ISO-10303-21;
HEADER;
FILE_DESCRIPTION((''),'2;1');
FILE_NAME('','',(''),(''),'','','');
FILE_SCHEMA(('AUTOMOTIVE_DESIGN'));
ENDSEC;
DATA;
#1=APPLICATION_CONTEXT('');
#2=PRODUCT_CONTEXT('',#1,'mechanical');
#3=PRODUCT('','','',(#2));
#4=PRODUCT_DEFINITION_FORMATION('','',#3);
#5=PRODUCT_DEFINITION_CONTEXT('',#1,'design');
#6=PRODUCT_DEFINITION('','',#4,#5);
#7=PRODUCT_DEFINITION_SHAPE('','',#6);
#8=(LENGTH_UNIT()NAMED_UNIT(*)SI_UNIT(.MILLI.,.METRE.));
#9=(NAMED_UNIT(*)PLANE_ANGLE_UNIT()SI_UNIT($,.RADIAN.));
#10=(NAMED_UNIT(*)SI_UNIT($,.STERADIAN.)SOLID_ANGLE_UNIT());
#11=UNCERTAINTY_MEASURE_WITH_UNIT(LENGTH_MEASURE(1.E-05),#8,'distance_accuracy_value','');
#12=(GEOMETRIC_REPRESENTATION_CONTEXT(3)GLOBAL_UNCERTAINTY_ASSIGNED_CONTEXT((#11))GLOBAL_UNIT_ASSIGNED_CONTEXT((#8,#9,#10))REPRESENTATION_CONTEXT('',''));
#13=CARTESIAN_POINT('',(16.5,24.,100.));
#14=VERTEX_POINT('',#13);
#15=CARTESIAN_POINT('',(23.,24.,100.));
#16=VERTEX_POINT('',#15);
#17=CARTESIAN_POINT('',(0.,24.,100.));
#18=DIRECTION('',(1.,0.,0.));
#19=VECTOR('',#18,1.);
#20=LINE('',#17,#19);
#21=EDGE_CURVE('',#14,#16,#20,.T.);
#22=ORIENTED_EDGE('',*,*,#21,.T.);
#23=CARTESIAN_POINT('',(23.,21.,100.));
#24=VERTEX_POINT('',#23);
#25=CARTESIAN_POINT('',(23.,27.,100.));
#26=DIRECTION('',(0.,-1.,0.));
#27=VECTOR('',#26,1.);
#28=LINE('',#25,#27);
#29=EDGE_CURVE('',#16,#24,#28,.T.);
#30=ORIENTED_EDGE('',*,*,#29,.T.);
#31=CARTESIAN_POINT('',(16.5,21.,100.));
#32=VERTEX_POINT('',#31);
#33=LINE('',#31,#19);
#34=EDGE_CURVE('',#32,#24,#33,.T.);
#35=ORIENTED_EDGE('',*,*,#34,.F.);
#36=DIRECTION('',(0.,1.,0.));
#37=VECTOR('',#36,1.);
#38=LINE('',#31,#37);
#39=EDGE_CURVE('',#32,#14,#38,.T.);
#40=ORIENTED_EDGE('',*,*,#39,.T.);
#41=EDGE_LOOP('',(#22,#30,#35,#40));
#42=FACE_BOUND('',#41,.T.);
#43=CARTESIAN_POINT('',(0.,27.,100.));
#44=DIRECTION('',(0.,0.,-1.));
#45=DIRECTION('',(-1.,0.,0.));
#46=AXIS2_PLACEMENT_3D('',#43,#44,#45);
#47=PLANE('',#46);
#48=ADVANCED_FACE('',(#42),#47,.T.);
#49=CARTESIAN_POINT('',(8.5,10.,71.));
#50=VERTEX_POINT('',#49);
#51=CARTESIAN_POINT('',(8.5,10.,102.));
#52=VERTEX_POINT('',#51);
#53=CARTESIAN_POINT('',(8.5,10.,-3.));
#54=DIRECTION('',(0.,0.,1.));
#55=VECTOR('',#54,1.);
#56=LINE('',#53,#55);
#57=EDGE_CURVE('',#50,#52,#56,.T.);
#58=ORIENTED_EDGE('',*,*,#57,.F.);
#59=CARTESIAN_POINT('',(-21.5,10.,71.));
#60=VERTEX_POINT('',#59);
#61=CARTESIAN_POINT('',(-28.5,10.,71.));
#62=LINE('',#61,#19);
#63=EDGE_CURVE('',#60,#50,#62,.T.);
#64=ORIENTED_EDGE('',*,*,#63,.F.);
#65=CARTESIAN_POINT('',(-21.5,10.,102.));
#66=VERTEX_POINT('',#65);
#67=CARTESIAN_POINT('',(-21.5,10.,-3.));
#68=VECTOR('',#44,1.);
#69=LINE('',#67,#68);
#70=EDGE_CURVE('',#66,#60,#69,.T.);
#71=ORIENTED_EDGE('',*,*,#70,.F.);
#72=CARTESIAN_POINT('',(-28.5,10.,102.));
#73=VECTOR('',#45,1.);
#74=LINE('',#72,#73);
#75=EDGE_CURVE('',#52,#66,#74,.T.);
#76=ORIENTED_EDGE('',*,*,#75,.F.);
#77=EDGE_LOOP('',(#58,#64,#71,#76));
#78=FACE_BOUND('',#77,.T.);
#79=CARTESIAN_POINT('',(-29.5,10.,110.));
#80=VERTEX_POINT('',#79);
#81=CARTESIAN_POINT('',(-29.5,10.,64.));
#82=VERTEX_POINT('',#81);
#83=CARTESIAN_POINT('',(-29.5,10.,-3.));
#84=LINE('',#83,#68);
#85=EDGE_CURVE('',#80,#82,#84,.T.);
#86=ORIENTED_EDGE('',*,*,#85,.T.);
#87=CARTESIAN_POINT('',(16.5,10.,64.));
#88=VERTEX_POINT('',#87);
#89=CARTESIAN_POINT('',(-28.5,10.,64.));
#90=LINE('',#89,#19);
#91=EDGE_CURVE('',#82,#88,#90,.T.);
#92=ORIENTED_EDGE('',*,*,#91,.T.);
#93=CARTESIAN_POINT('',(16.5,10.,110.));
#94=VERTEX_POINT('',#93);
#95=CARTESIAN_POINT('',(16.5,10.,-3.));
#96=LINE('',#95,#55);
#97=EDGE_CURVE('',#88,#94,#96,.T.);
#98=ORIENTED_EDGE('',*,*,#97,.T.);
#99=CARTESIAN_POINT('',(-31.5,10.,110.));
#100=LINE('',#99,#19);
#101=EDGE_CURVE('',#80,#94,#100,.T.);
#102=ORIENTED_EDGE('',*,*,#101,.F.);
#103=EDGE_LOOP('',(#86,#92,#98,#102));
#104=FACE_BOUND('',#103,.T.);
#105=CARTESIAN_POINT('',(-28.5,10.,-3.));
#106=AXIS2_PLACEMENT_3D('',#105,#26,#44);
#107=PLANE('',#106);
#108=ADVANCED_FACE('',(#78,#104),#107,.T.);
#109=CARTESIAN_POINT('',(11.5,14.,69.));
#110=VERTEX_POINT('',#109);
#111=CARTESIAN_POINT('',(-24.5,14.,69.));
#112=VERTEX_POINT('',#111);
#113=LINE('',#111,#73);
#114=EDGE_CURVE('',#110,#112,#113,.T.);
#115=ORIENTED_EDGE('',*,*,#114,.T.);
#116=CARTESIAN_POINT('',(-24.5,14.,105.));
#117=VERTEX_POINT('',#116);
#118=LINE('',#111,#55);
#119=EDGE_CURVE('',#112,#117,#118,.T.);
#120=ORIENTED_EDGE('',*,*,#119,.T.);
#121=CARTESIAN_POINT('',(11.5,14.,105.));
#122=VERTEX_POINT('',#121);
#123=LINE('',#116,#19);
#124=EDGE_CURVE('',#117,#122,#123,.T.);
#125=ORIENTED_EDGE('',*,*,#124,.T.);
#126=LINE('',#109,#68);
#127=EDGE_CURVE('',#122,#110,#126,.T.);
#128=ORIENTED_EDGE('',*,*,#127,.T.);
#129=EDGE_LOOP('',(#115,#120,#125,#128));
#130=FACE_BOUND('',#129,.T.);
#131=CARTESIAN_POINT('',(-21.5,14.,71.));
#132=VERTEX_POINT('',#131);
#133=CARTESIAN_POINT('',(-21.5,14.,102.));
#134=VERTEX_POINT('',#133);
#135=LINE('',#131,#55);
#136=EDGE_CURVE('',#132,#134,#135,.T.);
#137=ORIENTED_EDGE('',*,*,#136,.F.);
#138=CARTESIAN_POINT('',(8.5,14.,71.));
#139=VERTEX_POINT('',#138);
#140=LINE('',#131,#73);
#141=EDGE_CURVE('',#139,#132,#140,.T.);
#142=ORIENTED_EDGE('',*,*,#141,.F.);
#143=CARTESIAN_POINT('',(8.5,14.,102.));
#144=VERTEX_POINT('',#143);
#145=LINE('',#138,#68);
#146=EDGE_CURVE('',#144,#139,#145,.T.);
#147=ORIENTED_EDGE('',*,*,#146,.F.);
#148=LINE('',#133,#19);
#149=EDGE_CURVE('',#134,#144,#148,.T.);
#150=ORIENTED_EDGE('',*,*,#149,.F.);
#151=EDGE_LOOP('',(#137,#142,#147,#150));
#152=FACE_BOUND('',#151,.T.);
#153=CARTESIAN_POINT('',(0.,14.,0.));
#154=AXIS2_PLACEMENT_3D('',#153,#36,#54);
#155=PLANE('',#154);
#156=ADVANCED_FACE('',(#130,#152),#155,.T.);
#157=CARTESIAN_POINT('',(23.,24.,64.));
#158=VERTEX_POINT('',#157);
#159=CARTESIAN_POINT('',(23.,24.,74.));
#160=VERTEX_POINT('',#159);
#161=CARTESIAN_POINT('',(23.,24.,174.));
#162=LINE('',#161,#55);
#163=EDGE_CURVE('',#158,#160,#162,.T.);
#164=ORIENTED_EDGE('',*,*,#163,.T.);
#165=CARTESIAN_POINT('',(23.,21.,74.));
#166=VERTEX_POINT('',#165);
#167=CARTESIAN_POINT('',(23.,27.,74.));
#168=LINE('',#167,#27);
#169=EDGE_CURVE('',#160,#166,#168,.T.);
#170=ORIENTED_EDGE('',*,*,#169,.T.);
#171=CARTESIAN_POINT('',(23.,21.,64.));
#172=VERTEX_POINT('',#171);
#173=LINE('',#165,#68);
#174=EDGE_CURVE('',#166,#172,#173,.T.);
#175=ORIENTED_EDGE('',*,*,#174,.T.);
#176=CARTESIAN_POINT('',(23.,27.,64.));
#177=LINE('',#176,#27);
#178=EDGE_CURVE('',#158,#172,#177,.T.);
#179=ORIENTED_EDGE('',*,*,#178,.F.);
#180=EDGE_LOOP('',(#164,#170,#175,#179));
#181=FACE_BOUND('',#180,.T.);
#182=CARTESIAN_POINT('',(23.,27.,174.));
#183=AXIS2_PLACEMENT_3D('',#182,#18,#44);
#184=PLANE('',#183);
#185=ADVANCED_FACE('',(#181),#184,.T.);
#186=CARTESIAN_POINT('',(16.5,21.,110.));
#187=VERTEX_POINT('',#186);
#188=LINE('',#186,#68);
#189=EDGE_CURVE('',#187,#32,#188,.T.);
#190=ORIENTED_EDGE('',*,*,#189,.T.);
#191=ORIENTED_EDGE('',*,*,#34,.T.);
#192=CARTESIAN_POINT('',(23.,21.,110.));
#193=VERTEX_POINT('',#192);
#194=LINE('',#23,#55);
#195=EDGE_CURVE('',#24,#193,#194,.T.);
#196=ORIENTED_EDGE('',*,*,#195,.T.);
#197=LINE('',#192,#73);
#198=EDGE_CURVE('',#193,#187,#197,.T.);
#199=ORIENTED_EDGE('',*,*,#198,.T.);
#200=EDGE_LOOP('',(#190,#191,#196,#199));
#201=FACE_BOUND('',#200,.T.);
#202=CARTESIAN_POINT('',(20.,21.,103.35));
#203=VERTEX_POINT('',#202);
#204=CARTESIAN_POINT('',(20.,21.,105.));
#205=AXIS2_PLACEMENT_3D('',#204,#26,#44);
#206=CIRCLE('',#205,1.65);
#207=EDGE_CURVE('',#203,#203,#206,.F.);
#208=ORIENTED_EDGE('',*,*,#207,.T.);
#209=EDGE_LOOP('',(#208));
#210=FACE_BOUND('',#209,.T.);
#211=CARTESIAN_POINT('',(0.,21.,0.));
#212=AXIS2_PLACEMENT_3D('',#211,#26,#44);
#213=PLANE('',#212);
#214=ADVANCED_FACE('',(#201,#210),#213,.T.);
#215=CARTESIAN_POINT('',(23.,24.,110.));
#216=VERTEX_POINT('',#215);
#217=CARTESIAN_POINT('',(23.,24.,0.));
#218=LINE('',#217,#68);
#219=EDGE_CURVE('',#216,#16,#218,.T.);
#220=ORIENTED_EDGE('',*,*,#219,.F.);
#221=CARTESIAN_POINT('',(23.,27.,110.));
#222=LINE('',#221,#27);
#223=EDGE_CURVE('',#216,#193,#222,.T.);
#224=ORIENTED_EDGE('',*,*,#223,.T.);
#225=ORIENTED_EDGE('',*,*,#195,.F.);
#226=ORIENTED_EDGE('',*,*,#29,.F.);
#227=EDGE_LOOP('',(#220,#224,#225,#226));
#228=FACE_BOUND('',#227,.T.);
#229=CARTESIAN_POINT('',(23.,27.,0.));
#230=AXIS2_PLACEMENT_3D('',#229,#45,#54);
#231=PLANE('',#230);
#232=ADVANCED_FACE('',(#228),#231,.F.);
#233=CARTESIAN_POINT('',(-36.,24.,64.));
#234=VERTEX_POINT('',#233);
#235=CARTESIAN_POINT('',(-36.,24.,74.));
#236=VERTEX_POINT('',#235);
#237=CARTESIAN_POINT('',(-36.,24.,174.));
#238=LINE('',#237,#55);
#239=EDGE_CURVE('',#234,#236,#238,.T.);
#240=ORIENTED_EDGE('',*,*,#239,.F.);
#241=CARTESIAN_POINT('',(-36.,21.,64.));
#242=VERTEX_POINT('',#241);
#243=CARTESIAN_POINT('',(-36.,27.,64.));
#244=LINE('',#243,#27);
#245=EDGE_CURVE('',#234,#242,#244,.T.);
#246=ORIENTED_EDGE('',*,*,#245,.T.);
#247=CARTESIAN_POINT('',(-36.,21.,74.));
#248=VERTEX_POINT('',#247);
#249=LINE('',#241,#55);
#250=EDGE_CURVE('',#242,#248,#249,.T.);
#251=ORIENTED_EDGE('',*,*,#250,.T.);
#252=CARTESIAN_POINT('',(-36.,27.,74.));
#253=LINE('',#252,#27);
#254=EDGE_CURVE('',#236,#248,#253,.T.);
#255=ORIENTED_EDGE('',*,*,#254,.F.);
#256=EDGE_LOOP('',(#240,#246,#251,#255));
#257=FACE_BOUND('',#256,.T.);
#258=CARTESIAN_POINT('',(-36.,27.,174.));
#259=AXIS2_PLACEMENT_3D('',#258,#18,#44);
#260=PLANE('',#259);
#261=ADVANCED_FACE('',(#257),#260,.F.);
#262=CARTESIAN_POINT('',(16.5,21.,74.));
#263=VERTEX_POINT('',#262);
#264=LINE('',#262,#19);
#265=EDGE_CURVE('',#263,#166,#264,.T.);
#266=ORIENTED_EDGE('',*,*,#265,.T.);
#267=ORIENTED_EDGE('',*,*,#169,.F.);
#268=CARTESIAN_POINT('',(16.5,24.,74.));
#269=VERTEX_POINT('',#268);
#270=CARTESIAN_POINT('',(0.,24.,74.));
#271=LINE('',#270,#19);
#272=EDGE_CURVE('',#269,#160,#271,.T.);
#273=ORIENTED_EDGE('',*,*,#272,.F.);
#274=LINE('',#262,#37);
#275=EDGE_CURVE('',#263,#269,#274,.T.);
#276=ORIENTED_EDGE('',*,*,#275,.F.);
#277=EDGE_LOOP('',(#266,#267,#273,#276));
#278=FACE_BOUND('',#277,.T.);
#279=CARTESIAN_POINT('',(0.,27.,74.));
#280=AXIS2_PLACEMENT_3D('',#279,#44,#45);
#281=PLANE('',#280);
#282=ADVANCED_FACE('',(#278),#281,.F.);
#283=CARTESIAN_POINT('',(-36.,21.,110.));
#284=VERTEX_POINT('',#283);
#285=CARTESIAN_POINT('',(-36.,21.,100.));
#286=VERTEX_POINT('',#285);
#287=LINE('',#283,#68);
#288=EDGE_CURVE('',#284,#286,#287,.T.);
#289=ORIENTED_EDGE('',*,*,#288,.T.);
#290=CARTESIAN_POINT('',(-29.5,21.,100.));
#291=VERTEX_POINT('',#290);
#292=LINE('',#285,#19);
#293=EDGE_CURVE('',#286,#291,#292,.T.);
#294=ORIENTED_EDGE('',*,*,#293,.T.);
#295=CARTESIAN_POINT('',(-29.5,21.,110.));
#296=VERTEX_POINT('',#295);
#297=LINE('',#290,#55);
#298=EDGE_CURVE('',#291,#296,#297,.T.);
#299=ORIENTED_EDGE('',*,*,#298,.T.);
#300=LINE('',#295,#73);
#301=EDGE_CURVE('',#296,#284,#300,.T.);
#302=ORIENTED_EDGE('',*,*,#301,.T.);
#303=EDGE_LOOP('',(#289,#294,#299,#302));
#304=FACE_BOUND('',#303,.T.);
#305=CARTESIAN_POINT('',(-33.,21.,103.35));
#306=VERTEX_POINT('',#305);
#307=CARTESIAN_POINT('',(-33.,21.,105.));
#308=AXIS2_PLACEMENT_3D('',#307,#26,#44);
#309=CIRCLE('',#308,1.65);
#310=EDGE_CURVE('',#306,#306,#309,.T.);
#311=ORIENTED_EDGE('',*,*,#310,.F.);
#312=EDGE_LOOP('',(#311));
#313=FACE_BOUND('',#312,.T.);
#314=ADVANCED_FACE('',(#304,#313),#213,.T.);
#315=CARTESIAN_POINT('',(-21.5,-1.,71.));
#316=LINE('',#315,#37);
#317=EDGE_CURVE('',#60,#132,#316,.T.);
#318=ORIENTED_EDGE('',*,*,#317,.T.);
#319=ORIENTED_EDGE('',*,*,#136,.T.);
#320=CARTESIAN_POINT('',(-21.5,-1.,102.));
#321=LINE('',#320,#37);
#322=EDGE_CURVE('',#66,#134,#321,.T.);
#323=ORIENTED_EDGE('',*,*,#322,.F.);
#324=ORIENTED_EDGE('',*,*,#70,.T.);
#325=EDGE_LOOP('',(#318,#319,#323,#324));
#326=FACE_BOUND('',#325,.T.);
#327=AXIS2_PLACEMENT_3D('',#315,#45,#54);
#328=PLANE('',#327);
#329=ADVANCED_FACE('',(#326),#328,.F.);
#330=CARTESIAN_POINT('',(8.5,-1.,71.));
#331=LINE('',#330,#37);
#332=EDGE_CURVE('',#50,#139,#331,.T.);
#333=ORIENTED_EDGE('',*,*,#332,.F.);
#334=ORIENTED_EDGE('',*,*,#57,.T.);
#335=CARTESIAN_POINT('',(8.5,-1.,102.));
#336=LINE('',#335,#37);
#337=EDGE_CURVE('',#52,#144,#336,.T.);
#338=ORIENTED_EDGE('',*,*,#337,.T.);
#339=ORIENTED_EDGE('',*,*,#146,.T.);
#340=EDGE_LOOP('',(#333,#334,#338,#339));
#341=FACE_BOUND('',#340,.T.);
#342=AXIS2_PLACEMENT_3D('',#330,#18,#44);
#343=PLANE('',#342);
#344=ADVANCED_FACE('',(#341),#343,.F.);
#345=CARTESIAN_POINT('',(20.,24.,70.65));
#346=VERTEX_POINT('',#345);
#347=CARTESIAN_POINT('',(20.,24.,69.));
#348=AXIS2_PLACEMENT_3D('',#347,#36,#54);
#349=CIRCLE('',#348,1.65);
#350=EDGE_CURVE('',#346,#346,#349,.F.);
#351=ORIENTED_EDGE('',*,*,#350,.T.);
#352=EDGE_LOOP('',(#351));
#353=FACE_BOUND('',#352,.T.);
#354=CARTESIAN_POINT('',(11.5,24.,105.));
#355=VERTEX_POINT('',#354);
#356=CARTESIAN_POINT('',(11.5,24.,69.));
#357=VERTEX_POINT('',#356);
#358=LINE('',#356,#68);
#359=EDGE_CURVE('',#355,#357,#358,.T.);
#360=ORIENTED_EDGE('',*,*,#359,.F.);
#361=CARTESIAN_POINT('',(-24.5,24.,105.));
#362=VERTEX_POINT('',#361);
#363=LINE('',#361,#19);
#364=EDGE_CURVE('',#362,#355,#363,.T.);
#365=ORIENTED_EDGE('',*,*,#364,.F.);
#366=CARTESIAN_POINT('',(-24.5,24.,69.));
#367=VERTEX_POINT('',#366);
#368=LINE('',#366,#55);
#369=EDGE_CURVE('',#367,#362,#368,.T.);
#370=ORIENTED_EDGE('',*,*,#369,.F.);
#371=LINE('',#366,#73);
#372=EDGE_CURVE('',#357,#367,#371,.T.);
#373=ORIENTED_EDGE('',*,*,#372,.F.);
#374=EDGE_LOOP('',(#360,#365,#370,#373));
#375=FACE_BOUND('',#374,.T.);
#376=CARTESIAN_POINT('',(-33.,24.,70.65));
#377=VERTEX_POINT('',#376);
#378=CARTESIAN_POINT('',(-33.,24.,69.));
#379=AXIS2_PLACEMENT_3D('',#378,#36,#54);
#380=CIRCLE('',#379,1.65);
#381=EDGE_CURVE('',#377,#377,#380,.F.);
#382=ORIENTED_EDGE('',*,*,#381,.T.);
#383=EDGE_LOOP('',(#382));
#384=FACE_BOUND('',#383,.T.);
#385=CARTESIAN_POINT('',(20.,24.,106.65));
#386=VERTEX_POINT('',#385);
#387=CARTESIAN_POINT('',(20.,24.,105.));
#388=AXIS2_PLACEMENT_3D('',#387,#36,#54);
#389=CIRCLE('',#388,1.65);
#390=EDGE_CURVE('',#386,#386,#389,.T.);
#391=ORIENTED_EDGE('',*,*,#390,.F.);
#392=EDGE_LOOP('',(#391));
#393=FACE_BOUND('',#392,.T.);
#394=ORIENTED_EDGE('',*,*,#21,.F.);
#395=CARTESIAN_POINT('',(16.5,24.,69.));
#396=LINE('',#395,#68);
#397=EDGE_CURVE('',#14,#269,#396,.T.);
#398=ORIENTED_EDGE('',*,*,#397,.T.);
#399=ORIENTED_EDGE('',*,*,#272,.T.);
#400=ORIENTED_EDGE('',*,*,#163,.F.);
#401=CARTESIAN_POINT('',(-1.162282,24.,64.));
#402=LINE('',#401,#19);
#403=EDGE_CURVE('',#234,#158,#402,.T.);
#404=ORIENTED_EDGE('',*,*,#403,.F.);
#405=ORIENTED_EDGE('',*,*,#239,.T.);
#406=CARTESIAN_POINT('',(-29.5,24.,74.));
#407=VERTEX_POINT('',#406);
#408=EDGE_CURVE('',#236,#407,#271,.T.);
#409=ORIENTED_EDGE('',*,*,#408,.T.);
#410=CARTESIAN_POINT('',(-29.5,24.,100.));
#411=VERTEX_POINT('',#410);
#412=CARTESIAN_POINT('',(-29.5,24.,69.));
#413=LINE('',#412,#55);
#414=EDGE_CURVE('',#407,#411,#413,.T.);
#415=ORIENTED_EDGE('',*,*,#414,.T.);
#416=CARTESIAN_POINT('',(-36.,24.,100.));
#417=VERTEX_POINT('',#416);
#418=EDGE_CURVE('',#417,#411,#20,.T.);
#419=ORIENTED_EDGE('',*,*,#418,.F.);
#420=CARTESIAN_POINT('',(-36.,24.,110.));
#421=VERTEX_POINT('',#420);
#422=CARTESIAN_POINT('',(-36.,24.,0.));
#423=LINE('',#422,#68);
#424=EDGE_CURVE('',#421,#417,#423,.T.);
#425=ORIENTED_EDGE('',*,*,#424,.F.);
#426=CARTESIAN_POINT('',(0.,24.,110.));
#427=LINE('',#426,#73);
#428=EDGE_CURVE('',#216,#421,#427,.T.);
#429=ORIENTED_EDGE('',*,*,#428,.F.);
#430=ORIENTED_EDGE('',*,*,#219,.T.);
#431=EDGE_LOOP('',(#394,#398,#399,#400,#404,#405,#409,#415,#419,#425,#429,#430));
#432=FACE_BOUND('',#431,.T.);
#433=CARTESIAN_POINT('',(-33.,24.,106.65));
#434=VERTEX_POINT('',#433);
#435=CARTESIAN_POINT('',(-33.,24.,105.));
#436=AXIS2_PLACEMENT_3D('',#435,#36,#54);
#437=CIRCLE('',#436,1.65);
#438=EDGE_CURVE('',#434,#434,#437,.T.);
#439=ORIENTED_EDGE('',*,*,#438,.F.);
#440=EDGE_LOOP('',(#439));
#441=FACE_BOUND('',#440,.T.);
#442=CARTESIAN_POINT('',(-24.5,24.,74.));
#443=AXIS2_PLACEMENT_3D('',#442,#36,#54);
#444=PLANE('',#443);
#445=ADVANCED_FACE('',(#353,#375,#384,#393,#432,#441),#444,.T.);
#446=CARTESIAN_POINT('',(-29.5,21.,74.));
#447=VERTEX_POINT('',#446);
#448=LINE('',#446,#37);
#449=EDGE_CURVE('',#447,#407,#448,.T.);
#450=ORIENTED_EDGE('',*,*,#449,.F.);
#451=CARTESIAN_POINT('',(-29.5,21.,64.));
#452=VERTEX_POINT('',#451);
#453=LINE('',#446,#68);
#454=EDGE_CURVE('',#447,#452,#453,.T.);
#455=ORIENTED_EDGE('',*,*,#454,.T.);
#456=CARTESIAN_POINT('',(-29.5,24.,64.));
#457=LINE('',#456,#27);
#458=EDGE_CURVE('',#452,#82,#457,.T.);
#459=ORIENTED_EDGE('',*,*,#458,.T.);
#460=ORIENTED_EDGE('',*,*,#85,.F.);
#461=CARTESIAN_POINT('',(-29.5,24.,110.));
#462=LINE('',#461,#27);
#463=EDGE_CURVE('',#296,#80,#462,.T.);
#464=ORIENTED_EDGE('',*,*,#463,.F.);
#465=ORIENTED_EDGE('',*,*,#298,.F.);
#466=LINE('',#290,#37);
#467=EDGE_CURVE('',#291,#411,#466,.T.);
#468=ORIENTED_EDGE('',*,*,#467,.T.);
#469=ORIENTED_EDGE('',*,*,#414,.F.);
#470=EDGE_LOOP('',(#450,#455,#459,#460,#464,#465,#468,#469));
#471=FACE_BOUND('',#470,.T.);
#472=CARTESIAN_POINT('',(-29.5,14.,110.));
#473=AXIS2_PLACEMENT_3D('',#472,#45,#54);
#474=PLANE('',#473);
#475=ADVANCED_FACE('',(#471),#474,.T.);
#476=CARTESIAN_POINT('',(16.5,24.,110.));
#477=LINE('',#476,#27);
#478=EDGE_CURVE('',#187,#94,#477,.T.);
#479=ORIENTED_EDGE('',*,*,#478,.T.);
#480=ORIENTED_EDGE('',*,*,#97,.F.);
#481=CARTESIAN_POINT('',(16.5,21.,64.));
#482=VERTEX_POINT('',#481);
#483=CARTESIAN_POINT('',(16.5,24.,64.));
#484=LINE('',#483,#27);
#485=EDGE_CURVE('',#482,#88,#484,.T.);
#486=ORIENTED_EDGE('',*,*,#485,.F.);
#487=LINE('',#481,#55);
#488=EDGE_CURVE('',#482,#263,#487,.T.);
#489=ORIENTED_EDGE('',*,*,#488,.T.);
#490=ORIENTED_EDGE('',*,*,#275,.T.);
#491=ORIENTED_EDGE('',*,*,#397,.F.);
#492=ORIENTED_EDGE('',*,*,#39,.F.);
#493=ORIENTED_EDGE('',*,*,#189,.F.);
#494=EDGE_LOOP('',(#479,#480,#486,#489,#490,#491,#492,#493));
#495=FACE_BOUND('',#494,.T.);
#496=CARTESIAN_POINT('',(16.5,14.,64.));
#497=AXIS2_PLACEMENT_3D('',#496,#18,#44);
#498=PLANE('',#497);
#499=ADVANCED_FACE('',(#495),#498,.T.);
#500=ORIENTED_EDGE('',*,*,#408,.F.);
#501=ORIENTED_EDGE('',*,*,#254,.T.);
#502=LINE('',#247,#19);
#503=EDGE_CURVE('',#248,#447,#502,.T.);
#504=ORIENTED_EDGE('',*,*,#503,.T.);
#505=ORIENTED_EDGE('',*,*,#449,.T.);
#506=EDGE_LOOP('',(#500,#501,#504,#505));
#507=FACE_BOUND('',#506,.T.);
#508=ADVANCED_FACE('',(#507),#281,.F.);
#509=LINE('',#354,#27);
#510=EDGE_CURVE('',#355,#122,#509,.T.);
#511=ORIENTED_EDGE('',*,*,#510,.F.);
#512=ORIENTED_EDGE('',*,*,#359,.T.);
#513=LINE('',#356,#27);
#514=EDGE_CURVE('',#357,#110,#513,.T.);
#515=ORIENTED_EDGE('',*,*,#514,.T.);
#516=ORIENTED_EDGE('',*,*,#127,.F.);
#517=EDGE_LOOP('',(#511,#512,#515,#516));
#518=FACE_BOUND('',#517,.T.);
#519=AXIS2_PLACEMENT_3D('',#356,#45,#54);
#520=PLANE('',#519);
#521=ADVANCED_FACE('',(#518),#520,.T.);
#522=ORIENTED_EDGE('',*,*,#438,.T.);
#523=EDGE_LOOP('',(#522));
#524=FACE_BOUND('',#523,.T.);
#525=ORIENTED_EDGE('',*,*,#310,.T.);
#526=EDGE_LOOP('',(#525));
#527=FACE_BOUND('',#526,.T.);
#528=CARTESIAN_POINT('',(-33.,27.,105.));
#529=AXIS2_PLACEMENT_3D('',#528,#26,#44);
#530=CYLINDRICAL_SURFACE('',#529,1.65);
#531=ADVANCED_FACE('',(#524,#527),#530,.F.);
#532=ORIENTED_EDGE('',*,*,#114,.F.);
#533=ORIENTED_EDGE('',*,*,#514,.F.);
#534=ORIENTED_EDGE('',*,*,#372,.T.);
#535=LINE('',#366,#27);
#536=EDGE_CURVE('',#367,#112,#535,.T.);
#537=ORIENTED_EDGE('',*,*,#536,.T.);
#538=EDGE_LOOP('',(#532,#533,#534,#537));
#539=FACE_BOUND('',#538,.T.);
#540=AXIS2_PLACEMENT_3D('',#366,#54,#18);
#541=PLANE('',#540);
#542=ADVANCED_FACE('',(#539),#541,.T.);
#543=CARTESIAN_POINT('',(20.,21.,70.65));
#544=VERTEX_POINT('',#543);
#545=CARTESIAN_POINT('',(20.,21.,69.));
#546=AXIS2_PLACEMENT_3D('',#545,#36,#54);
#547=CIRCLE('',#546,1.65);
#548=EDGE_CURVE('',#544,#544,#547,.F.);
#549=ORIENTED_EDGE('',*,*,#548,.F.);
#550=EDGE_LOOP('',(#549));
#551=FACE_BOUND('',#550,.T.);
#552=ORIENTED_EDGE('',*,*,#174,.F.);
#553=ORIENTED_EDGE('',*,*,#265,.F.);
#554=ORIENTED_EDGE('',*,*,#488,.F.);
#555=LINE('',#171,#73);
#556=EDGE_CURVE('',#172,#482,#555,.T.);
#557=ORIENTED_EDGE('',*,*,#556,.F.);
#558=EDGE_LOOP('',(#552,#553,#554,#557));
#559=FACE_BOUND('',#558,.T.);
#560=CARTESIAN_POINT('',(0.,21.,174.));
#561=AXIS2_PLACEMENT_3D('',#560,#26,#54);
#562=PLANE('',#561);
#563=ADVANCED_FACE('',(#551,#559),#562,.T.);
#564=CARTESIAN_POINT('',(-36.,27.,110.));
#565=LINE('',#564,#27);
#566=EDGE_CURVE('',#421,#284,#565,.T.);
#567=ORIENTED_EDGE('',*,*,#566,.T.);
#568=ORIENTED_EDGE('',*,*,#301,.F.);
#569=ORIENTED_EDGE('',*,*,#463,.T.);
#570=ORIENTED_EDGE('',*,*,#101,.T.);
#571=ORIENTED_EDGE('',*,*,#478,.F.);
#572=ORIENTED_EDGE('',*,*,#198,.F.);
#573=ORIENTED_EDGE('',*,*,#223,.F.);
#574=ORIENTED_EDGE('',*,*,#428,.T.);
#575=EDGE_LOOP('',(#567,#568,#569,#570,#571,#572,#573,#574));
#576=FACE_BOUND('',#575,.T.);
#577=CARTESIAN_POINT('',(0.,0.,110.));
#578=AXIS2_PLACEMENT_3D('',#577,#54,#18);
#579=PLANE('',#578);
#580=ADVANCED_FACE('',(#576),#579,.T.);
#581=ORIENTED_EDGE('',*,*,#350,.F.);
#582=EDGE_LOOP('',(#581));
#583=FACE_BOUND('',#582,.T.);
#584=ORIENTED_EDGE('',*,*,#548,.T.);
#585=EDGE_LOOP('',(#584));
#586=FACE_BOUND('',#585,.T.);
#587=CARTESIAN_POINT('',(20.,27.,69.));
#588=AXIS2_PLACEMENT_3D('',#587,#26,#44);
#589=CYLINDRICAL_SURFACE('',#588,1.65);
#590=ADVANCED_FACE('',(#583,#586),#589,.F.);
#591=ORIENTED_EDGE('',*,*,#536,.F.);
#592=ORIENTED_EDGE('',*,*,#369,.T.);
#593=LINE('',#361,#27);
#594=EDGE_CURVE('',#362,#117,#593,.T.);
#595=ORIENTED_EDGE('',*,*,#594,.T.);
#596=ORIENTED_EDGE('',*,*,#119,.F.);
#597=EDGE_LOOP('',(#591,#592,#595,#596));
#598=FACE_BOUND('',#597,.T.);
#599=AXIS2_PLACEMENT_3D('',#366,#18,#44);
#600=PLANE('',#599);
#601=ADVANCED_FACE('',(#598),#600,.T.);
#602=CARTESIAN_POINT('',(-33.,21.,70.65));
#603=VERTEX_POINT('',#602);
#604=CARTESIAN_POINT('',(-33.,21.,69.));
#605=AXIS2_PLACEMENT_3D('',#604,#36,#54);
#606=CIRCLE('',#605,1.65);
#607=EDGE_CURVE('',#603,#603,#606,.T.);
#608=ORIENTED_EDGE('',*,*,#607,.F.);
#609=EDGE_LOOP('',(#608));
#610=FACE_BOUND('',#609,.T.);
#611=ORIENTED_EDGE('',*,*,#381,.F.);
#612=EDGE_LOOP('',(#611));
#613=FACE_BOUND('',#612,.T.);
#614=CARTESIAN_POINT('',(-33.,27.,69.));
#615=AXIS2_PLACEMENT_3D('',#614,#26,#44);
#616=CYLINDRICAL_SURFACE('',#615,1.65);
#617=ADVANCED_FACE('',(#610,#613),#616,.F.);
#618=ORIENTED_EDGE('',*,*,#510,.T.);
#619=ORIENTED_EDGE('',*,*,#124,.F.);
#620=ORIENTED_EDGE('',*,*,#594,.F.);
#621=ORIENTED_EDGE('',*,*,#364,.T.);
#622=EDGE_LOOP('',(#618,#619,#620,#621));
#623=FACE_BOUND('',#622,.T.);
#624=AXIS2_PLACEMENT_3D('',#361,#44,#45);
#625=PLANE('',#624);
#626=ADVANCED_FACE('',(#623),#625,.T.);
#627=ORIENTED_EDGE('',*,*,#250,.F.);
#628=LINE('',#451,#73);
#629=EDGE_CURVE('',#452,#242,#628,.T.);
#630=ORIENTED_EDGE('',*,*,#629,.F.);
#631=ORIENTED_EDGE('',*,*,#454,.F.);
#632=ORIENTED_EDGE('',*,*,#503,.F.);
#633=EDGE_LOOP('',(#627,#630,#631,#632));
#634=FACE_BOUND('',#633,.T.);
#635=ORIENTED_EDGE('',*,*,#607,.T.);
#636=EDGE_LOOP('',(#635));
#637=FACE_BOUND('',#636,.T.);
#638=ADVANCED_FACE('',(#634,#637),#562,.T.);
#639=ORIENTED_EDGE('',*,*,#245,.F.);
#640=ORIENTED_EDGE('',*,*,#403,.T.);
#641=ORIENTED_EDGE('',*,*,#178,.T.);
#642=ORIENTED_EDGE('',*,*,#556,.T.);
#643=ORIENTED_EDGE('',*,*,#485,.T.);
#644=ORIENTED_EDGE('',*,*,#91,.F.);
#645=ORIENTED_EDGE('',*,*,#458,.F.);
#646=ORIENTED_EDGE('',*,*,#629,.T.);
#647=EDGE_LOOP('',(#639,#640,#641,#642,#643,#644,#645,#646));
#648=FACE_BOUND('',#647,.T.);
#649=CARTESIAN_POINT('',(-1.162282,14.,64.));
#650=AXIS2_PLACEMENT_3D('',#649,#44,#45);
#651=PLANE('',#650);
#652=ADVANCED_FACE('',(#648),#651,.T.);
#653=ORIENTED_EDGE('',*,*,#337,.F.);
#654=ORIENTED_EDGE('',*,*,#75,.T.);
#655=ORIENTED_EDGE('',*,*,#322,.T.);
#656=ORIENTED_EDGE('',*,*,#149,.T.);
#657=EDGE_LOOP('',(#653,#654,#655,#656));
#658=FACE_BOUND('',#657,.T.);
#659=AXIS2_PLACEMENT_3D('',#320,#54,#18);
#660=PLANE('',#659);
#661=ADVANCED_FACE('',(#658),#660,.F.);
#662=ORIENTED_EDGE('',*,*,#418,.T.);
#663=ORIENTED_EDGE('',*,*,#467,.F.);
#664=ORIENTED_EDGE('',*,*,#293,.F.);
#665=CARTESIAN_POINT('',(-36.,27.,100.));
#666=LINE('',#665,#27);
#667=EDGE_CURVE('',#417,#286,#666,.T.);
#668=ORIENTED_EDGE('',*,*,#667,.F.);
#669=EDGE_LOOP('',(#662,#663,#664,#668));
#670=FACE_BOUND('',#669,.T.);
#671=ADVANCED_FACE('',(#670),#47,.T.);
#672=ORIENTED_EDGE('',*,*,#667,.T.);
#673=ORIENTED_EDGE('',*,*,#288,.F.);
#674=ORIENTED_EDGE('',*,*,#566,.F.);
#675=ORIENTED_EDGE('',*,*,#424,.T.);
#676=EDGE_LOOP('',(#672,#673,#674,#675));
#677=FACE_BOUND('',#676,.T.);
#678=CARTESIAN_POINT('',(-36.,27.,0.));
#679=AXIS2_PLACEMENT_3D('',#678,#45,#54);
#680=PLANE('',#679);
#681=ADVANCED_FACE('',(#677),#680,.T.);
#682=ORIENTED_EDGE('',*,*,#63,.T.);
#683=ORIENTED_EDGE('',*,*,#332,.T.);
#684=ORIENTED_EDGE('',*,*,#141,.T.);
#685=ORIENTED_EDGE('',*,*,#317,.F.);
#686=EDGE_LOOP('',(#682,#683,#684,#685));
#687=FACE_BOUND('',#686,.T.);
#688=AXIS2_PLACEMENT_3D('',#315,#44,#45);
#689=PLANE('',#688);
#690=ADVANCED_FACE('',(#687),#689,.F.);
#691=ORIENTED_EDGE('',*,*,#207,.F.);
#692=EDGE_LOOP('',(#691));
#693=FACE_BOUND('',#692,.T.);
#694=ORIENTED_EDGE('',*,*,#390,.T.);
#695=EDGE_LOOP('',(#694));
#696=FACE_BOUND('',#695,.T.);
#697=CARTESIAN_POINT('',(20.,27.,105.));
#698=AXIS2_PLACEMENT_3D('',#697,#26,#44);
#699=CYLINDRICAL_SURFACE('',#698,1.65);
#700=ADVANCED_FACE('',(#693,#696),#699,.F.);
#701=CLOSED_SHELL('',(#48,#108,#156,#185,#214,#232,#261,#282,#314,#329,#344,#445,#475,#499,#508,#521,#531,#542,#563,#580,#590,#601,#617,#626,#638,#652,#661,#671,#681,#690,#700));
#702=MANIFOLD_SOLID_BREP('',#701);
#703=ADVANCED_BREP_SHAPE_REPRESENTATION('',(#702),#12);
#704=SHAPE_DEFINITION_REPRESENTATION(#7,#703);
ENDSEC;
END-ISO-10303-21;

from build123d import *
from build123d.topology import SkipClean

# Parameters (mm, degrees)
SKETCH_1_W                 = 21
SKETCH_1_H                 = 20
EXTRUDE_1_DEPTH            = 4
SKETCH_2_R                 = 1.65
CUT_EXTRUDE_1_DEPTH        = 4
FILLET_1_R                 = 5
SKETCH_4_W                 = 44
SKETCH_4_H                 = 3
EXTRUDE_2_DEPTH            = 7
EXTRUDE_3_DEPTH            = 110
SKETCH_7_R                 = 1.5
CUT_EXTRUDE_3_DEPTH        = 93
CUT_EXTRUDE_4_DEPTH        = 93
SKETCH_18_W                = 8.046739473
SKETCH_18_H                = 3.477045647
CUT_EXTRUDE_5_DEPTH        = 10
EXTRUDE_START              = 1
SKETCH_21_R                = 1.5
EXTRUDE_4_DEPTH            = 1
SKETCH_27_W                = 38
SKETCH_27_H                = 4
EXTRUDE_9_DEPTH            = 1
FILLET_4_R                 = 0.5
EXTRUDE_START_2            = -4
SKETCH_28_R                = 1.5
EXTRUDE_10_DEPTH           = 4
SKETCH_30_W                = 6
SKETCH_30_H                = 110.5
EXTRUDE_11_DEPTH           = 4
SKETCH_31_W                = 50
SKETCH_31_H                = 4
CUT_EXTRUDE_6_DEPTH        = 5
SKETCH_32_W                = 30
SKETCH_32_H                = 31
CUT_EXTRUDE_7_DEPTH        = 15
SKETCH_33_W                = 23.953260528
SKETCH_33_H                = 6
EXTRUDE_12_DEPTH           = 4
SKETCH_34_W                = 46
SKETCH_34_H                = 46
SKETCH_34_W_2              = 36
SKETCH_34_H_2              = 36
EXTRUDE_1_2_DEPTH          = 10
SKETCH_36_W                = 6
SKETCH_36_H                = 6
EXTRUDE_13_DEPTH           = 4
SKETCH_37_R                = 1.7
CUT_EXTRUDE_8_DEPTH        = 10
FILLET_6_R                 = 1
SKETCH_38_W                = 10
SKETCH_38_H                = 5
CUT_EXTRUDE_9_DEPTH        = 10
SKETCH_39_W                = 7.314348503
SKETCH_39_H                = 1
SKETCH_39_W_2              = 6.638912025
EXTRUDE_14_DEPTH           = 4
SKETCH_40_W                = 10
SKETCH_40_H                = 1
SKETCH_40_H_2              = 4
EXTRUDE_15_DEPTH           = 14
SPLIT_START                = -29.5
SPLIT_BODIES_2_DEPTH       = 46
SPLIT_BODIES_2_2_DEPTH     = 5
SPLIT_START_2              = 11.5
SPLIT_BODIES_2_3_DEPTH     = 5
SPLIT_START_3              = -24.5
SPLIT_BODIES_2_4_OUTLINE_W = 4
SPLIT_BODIES_2_4_OUTLINE_H = 31
SPLIT_BODIES_2_4_DEPTH     = 3
SPLIT_START_4              = 8.5
SPLIT_BODIES_2_5_OUTLINE_W = 4
SPLIT_BODIES_2_5_OUTLINE_H = 31
SPLIT_BODIES_2_5_DEPTH     = 3
SPLIT_START_5              = -37.5
SPLIT_BODIES_2_6_OUTLINE_W = 14
SPLIT_BODIES_2_6_OUTLINE_H = 46
SPLIT_BODIES_2_6_DEPTH     = 54
SPLIT_START_6              = 10
SPLIT_BODIES_2_7_OUTLINE_R = 1.7
SPLIT_BODIES_2_7_DEPTH     = 4
SKETCH_43_W                = 5
SKETCH_43_H                = 5
SKETCH_43_W_2              = 36
EXTRUDE_16_DEPTH           = 3
SKETCH_44_W                = 6.5
SKETCH_44_H                = 10
SKETCH_44_R                = 1.65
EXTRUDE_17_DEPTH           = 3
SPLIT_START_7              = 24
SPLIT_BODIES_4_OUTLINE_W   = 59
SPLIT_BODIES_4_OUTLINE_H   = 10
SPLIT_BODIES_4_OUTLINE_R   = 1.65
SPLIT_BODIES_4_DEPTH       = 3
SPLIT_BODIES_4_2_OUTLINE_W = 59
SPLIT_BODIES_4_2_OUTLINE_H = 10
SPLIT_BODIES_4_2_OUTLINE_R = 1.65
SPLIT_BODIES_4_2_DEPTH     = 3
SPLIT_BODIES_4_3_OUTLINE_W = 59
SPLIT_BODIES_4_3_OUTLINE_H = 10
SPLIT_BODIES_4_3_OUTLINE_R = 1.65
SPLIT_BODIES_4_3_DEPTH     = 3


# Read off the part's stored shape, not the designer's step: 分割1, 分割2, 分割4
with BuildPart() as part:
    # 草图1 → Extrude 1 (new body)
    with BuildSketch(Plane.XY):
        Rectangle(SKETCH_1_W, SKETCH_1_H)
    extrude(amount=EXTRUDE_1_DEPTH)

    # 草图2 → 切除-拉伸1 (cut)
    with BuildSketch(Plane.XY.offset(4)):
        with Locations((-5, 4)):
            Circle(SKETCH_2_R)
        with Locations((5, 4)):
            Circle(SKETCH_2_R)
        with Locations((-5, -4)):
            Circle(SKETCH_2_R)
        with Locations((5, -4)):
            Circle(SKETCH_2_R)
    extrude(amount=-CUT_EXTRUDE_1_DEPTH, mode=Mode.SUBTRACT)

    # 圆角1
    fillet_1_edges = [part.edges().sort_by_distance(p)[0] for p in [
        (10.5, -10, 2),
        (-10.5, -10, 2),
    ]]
    fillet(fillet_1_edges, radius=FILLET_1_R)

    # 草图4 → 凸台-拉伸2 (add)
    with BuildSketch(Plane.XY.offset(4)):
        with Locations((-6.5, 11.5)):
            Rectangle(SKETCH_4_W, SKETCH_4_H)
    extrude(amount=-EXTRUDE_2_DEPTH)

    # 草图5 → 凸台-拉伸3 (add)
    with BuildSketch(Plane.XY.offset(4)):
        Polygon((-6.5, 13), (12.5, 13), (12.5, 10), (-25.5, 10), (-25.5, 13), align=None)
    extrude(amount=EXTRUDE_3_DEPTH)

    # 草图7 → 切除-拉伸3 (cut)
    with BuildSketch(Plane(origin=(0, 13, 0), x_dir=(1, 0, 0), z_dir=(0, 1, 0))):
        with Locations(Location((8.232, -104.79, 0), (0, 0, 270))):
            Circle(SKETCH_7_R)
        with Locations(Location((-21.232, -104.79, 0), (0, 0, 270))):
            Circle(SKETCH_7_R)
        with BuildLine():
            Line((5.476630264, -60.258900788), (5.476630264, -85.258900788))
            Line((5.476630264, -85.258900788), (5.476630264, -111))
            Line((5.476630264, -111), (-6.5, -111))
            Line((-6.5, -111), (-18.476630264, -111))
            Line((-18.476630264, -111), (-18.476630264, -85.258900788))
            Line((-18.476630264, -85.258900788), (-18.476630264, -60.258900788))
            ThreePointArc((-18.476630264, -60.258900788), (-6.5, -48.282270524), (5.476630264, -60.258900788))
        make_face()
    extrude(amount=-CUT_EXTRUDE_3_DEPTH, mode=Mode.SUBTRACT)

    # 草图12 → 切除-拉伸4 (cut)
    with BuildSketch(Plane(origin=(0, 13, 0), x_dir=(1, 0, 0), z_dir=(0, 1, 0))):
        with BuildLine():
            Line((-16.5, -11.5), (3.5, -11.5))
            ThreePointArc((3.5, -11.5), (6, -14), (3.5, -16.5))
            Line((3.5, -16.5), (-16.5, -16.5))
            ThreePointArc((-16.5, -16.5), (-19, -14), (-16.5, -11.5))
        make_face()
        with BuildLine():
            Line((-16.5, -24), (3.5, -24))
            ThreePointArc((3.5, -24), (6, -26.5), (3.5, -29))
            Line((3.5, -29), (-16.5, -29))
            ThreePointArc((-16.5, -29), (-19, -26.5), (-16.5, -24))
        make_face()
        with BuildLine():
            Line((-16.5, -34.5), (3.5, -34.5))
            ThreePointArc((3.5, -34.5), (6, -37), (3.5, -39.5))
            Line((3.5, -39.5), (-16.5, -39.5))
            ThreePointArc((-16.5, -39.5), (-19, -37), (-16.5, -34.5))
        make_face()
    extrude(amount=-CUT_EXTRUDE_4_DEPTH, mode=Mode.SUBTRACT)

    # 草图18 → 切除-拉伸5 (cut)
    with BuildSketch(Plane(origin=(0, 13, 0), x_dir=(1, 0, 0), z_dir=(0, 1, 0))):
        with Locations((5.476630263, -99.520878329)):
            Rectangle(SKETCH_18_W, SKETCH_18_H)
        with Locations((-18.476630263, -99.520878329)):
            Rectangle(SKETCH_18_W, SKETCH_18_H)
    extrude(amount=-CUT_EXTRUDE_5_DEPTH, mode=Mode.SUBTRACT)

    # 草图21 → 凸台-拉伸4 (add)
    with BuildSketch(Plane(origin=(0, 13, 0), x_dir=(1, 0, 0), z_dir=(0, 1, 0)).offset(EXTRUDE_START)):
        Polygon((12.5, -4), (15.5, -4), (15.5, 3), (-28.5, 3), (-28.5, -4), (-25.5, -4), (-25.5, -114), (12.5, -114), align=None)
        with Locations(Location((8.232, -104.79, 0), (0, 0, 270))):
            Circle(SKETCH_21_R, mode=Mode.SUBTRACT)
        with Locations(Location((-21.232, -104.79, 0), (0, 0, 270))):
            Circle(SKETCH_21_R, mode=Mode.SUBTRACT)
        with BuildLine():
            Line((9.5, -97.782355505), (5.476630264, -97.782355505))
            Line((5.476630264, -97.782355505), (5.476630264, -60.258900788))
            ThreePointArc((5.476630264, -60.258900788), (-6.5, -48.282270524), (-18.476630264, -60.258900788))
            Line((-18.476630264, -60.258900788), (-18.476630264, -97.782355505))
            Line((-18.476630264, -97.782355505), (-22.5, -97.782355505))
            Line((-22.5, -97.782355505), (-22.5, -101.259401152))
            Line((-22.5, -101.259401152), (-18.476630264, -101.259401152))
            Line((-18.476630264, -101.259401152), (-18.476630264, -111))
            Line((-18.476630264, -111), (5.476630264, -111))
            Line((5.476630264, -111), (5.476630264, -101.259401152))
            Line((5.476630264, -101.259401152), (9.5, -101.259401152))
            Line((9.5, -101.259401152), (9.5, -97.782355505))
        make_face(mode=Mode.SUBTRACT)
        with BuildLine():
            Line((-16.5, -39.5), (3.5, -39.5))
            ThreePointArc((3.5, -39.5), (6, -37), (3.5, -34.5))
            Line((3.5, -34.5), (-16.5, -34.5))
            ThreePointArc((-16.5, -34.5), (-19, -37), (-16.5, -39.5))
        make_face(mode=Mode.SUBTRACT)
        with BuildLine():
            Line((-16.5, -29), (3.5, -29))
            ThreePointArc((3.5, -29), (6, -26.5), (3.5, -24))
            Line((3.5, -24), (-16.5, -24))
            ThreePointArc((-16.5, -24), (-19, -26.5), (-16.5, -29))
        make_face(mode=Mode.SUBTRACT)
        with BuildLine():
            Line((-16.5, -16.5), (3.5, -16.5))
            ThreePointArc((3.5, -16.5), (6, -14), (3.5, -11.5))
            Line((3.5, -11.5), (-16.5, -11.5))
            ThreePointArc((-16.5, -11.5), (-19, -14), (-16.5, -16.5))
        make_face(mode=Mode.SUBTRACT)
    extrude(amount=-EXTRUDE_4_DEPTH)

    # 草图27 → 凸台-拉伸9 (add)
    with BuildSketch(Plane.XY.offset(114)):
        with Locations((-6.5, 12)):
            Rectangle(SKETCH_27_W, SKETCH_27_H)
    extrude(amount=EXTRUDE_9_DEPTH)

    # 圆角4
    fillet_4_edges = [part.edges().sort_by_distance(p)[0] for p in [
        (-25.5, 12, 115),
        (12.5, 12, 115),
    ]]
    fillet(fillet_4_edges, radius=FILLET_4_R)

    # 草图28 → 凸台-拉伸10 (add)
    with BuildSketch(Plane.XZ.offset(-10).offset(EXTRUDE_START_2)):
        with Locations((-21.232, 104.79)):
            Circle(SKETCH_28_R)
        with Locations((8.232, 104.79)):
            Circle(SKETCH_28_R)
        Polygon((-18.476630264, 111), (5.476630264, 111), (5.476630264, 101.259401152), (9.5, 101.259401152), (9.5, 97.782355505), (5.476630264, 97.782355505), (5.476630264, 75), (-18.476630264, 75), (-18.476630264, 97.782355505), (-22.5, 97.782355505), (-22.5, 101.259401152), (-18.476630264, 101.259401152), align=None)
    extrude(amount=EXTRUDE_10_DEPTH)

    # 草图30 → 凸台-拉伸11 (add)
    with BuildSketch(Plane(origin=(0, 14, 0), x_dir=(1, 0, 0), z_dir=(0, 1, 0))):
        with Locations((-28.5, -59.25)):
            Rectangle(SKETCH_30_W, SKETCH_30_H)
        with Locations((15.5, -59.25)):
            Rectangle(SKETCH_30_W, SKETCH_30_H)
    extrude(amount=-EXTRUDE_11_DEPTH)

    # 草图31 → 切除-拉伸6 (cut)
    with BuildSketch(Plane.XY.offset(115)):
        with Locations((-6.5, 12)):
            Rectangle(SKETCH_31_W, SKETCH_31_H)
    extrude(amount=-CUT_EXTRUDE_6_DEPTH, mode=Mode.SUBTRACT)

    # 草图32 → 切除-拉伸7 (cut)
    with BuildSketch(Plane(origin=(0, 14, 0), x_dir=(1, 0, 0), z_dir=(0, 1, 0))):
        with Locations((-6.5, -86.5)):
            Rectangle(SKETCH_32_W, SKETCH_32_H)
    extrude(amount=-CUT_EXTRUDE_7_DEPTH, mode=Mode.SUBTRACT)

    # 草图33 → 凸台-拉伸12 (add)
    with BuildSketch(Plane(origin=(0, 14, 0), x_dir=(1, 0, 0), z_dir=(0, 1, 0))):
        with Locations((-6.5, -68)):
            Rectangle(SKETCH_33_W, SKETCH_33_H)
    extrude(amount=-EXTRUDE_12_DEPTH)

    # 草图34 → Extrude 1 2 (add)
    with BuildSketch(Plane(origin=(0, 14, 0), x_dir=(1, 0, 0), z_dir=(0, 1, 0))):
        with Locations((-6.5, -87)):
            Rectangle(SKETCH_34_W, SKETCH_34_H)
        with Locations((-6.5, -87)):
            Rectangle(SKETCH_34_W_2, SKETCH_34_H_2, mode=Mode.SUBTRACT)
    extrude(amount=EXTRUDE_1_2_DEPTH)

    # 草图36 → 凸台-拉伸13 (add)
    with BuildSketch(Plane(origin=(0, 14, 0), x_dir=(1, 0, 0), z_dir=(0, 1, 0))):
        with Locations((21.5, -76)):
            Rectangle(SKETCH_36_W, SKETCH_36_H)
        with Locations((21.5, -97)):
            Rectangle(SKETCH_36_W, SKETCH_36_H)
        with Locations((-34.5, -97)):
            Rectangle(SKETCH_36_W, SKETCH_36_H)
        with Locations((-34.5, -76)):
            Rectangle(SKETCH_36_W, SKETCH_36_H)
    extrude(amount=-EXTRUDE_13_DEPTH)

    # 草图37 → 切除-拉伸8 (cut)
    with BuildSketch(Plane(origin=(0, 14, 0), x_dir=(1, 0, 0), z_dir=(0, 1, 0))):
        with Locations(Location((21.5, -76, 0), (0, 0, 270))):
            Circle(SKETCH_37_R)
        with Locations(Location((21.5, -97, 0), (0, 0, 270))):
            Circle(SKETCH_37_R)
        with Locations(Location((-34.5, -76, 0), (0, 0, 270))):
            Circle(SKETCH_37_R)
        with Locations(Location((-34.5, -97, 0), (0, 0, 270))):
            Circle(SKETCH_37_R)
    extrude(amount=-CUT_EXTRUDE_8_DEPTH, mode=Mode.SUBTRACT)

    # 圆角6
    fillet_6_edges = [part.edges().sort_by_distance(p)[0] for p in [
        (24.5, 12, 79),
        (24.5, 12, 73),
        (24.5, 12, 100),
        (24.5, 12, 94),
        (-37.5, 12, 100),
        (-37.5, 12, 94),
        (-37.5, 12, 79),
        (-37.5, 12, 73),
    ]]
    fillet(fillet_6_edges, radius=FILLET_6_R)

    # 草图38 → 切除-拉伸9 (cut)
    with BuildSketch(Plane(origin=(0, 24, 0), x_dir=(1, 0, 0), z_dir=(0, 1, 0))):
        with Locations((-6.162281761, -66.5)):
            Rectangle(SKETCH_38_W, SKETCH_38_H)
    extrude(amount=-CUT_EXTRUDE_9_DEPTH, mode=Mode.SUBTRACT)


with BuildPart() as body_2:
    # Split Bodies 1: the piece on the far side of the plane
    add(part.part)
    split(bisect_by=Plane.XY.offset(64), keep=Keep.BOTTOM)


with BuildPart() as part_1:
    add(part.part)

    # Split Bodies 1
    split(bisect_by=Plane.XY.offset(64), keep=Keep.TOP)

    # 草图39 → 凸台-拉伸14 (add)
    with BuildSketch(Plane.XZ.offset(-14)):
        with Locations((-14.819456013, 64.5)):
            Rectangle(SKETCH_39_W, SKETCH_39_H)
        with Locations((2.157174252, 64.5)):
            Rectangle(SKETCH_39_W_2, SKETCH_39_H)
    extrude(amount=EXTRUDE_14_DEPTH)

    # 草图40 → 凸台-拉伸15 (add)
    with BuildSketch(Plane.XZ.offset(-10)):
        with Locations((-6.162281761, 64.5)):
            Rectangle(SKETCH_40_W, SKETCH_40_H)
        with Locations((-6.162281761, 67)):
            Rectangle(SKETCH_40_W, SKETCH_40_H_2)
    extrude(amount=-EXTRUDE_15_DEPTH)

    # Split Bodies 2 6 outline → Split Bodies 2 6 (cut)
    with BuildSketch(Plane.YZ.offset(SPLIT_START_5)):
        with Locations((17, 87)):
            Rectangle(SPLIT_BODIES_2_6_OUTLINE_W, SPLIT_BODIES_2_6_OUTLINE_H)
    extrude(amount=SPLIT_BODIES_2_6_DEPTH, mode=Mode.SUBTRACT)


with BuildPart() as body_2_2:
    # Split Bodies 2 outline → Split Bodies 2 (new body)
    with BuildSketch(Plane.YZ.offset(SPLIT_START)):
        Polygon((24, 69), (14, 69), (14, 71), (10, 71), (10, 64), (24, 64), align=None)
        Polygon((10, 102), (14, 102), (14, 105), (24, 105), (24, 110), (10, 110), align=None)
    extrude(amount=SPLIT_BODIES_2_DEPTH)

    # Split Bodies 2 2 outline → Split Bodies 2 2 (add)
    with BuildSketch(Plane.YZ.offset(SPLIT_START)):
        Polygon((14, 71), (14, 69), (24, 69), (24, 105), (14, 105), (14, 102), (10, 102), (10, 71), align=None)
    extrude(amount=SPLIT_BODIES_2_2_DEPTH)

    # Split Bodies 2 3 outline → Split Bodies 2 3 (add)
    with BuildSketch(Plane.YZ.offset(SPLIT_START_2)):
        Polygon((14, 71), (14, 69), (24, 69), (24, 105), (14, 105), (14, 102), (10, 102), (10, 71), align=None)
    extrude(amount=SPLIT_BODIES_2_3_DEPTH)

    # Split Bodies 2 4 outline → Split Bodies 2 4 (add)
    with BuildSketch(Plane.YZ.offset(SPLIT_START_3)):
        with Locations((12, 86.5)):
            Rectangle(SPLIT_BODIES_2_4_OUTLINE_W, SPLIT_BODIES_2_4_OUTLINE_H)
    extrude(amount=SPLIT_BODIES_2_4_DEPTH)

    # Split Bodies 2 5 outline → Split Bodies 2 5 (add)
    with BuildSketch(Plane.YZ.offset(SPLIT_START_4)):
        with Locations((12, 86.5)):
            Rectangle(SPLIT_BODIES_2_5_OUTLINE_W, SPLIT_BODIES_2_5_OUTLINE_H)
    extrude(amount=SPLIT_BODIES_2_5_DEPTH)

    # 草图43 → 凸台-拉伸16 (add)
    with BuildSketch(Plane(origin=(0, 24, 0), x_dir=(1, 0, 0), z_dir=(0, 1, 0))):
        with BuildLine():
            Line((-36, -100), (-36, -105))
            Line((-36, -105), (-34.65, -105))
            ThreePointArc((-34.65, -105), (-33, -103.35), (-31.35, -105))
            Line((-31.35, -105), (-29.5, -105))
            Line((-29.5, -105), (-29.5, -100))
            Line((-29.5, -100), (-36, -100))
        make_face()
        with BuildLine():
            Line((-36, -105), (-36, -110))
            Line((-36, -110), (-29.5, -110))
            Line((-29.5, -110), (-29.5, -105))
            Line((-29.5, -105), (-31.35, -105))
            ThreePointArc((-31.35, -105), (-33, -106.65), (-34.65, -105))
            Line((-34.65, -105), (-36, -105))
        make_face()
        Polygon((-29.5, -105), (-29.5, -110), (16.5, -110), (16.5, -105), (11.5, -105), (-24.5, -105), align=None)
        with Locations((-27, -102.5)):
            Rectangle(SKETCH_43_W, SKETCH_43_H)
        with Locations((-6.5, -102.5)):
            Rectangle(SKETCH_43_W_2, SKETCH_43_H)
        with Locations((14, -102.5)):
            Rectangle(SKETCH_43_W, SKETCH_43_H)
        with BuildLine():
            Line((16.5, -105), (16.5, -110))
            Line((16.5, -110), (23, -110))
            Line((23, -110), (23, -105))
            Line((23, -105), (21.65, -105))
            ThreePointArc((21.65, -105), (20, -106.65), (18.35, -105))
            Line((18.35, -105), (16.5, -105))
        make_face()
        with BuildLine():
            Line((16.5, -100), (16.5, -105))
            Line((16.5, -105), (18.35, -105))
            ThreePointArc((18.35, -105), (20, -103.35), (21.65, -105))
            Line((21.65, -105), (23, -105))
            Line((23, -105), (23, -100))
            Line((23, -100), (16.5, -100))
        make_face()
    extrude_16 = extrude(amount=EXTRUDE_16_DEPTH)

    # 草图44 → 凸台-拉伸17 (add)
    # profile 1 of 2: a face of its own
    with SkipClean():  # the faces are left unmerged after this step: merging them gives an invalid solid
        with BuildSketch(Plane.XZ.offset(-24)):
            with Locations((-32.75, 105)):
                Rectangle(SKETCH_44_W, SKETCH_44_H)
            with Locations(Location((-33, 105, 0), (0, 0, 270))):
                Circle(SKETCH_44_R, mode=Mode.SUBTRACT)
        # profile 2 of 2: a face of its own
        with BuildSketch(Plane.XZ.offset(-24)):
            with Locations((19.75, 105)):
                Rectangle(SKETCH_44_W, SKETCH_44_H)
            with Locations(Location((20, 105, 0), (0, 0, 270))):
                Circle(SKETCH_44_R, mode=Mode.SUBTRACT)
        extrude_17 = extrude(amount=EXTRUDE_17_DEPTH)

    # 镜向2: 凸台-拉伸16, 凸台-拉伸17 across plane
    with SkipClean():  # the faces are left unmerged after this step: merging them gives an invalid solid
        add(extrude_16.mirror(Plane(origin=(0, 0, 87), x_dir=(1, 0, 0), z_dir=(0, 0, -1))))
        add(extrude_17.mirror(Plane(origin=(0, 0, 87), x_dir=(1, 0, 0), z_dir=(0, 0, -1))))
    add(body_2_2.part.scale(1), mode=Mode.REPLACE)  # the faces are merged on a copy

    # Split Bodies 4 outline → Split Bodies 4 (cut)
    # profile 1 of 2: a face of its own
    with BuildSketch(Plane(origin=(0, 0, 0), x_dir=(1, 0, 0), z_dir=(0, 1, 0)).offset(SPLIT_START_7)):
        with Locations((-6.5, -69)):
            Rectangle(SPLIT_BODIES_4_OUTLINE_W, SPLIT_BODIES_4_OUTLINE_H)
        with Locations((-33, -69)):
            Circle(SPLIT_BODIES_4_OUTLINE_R, mode=Mode.SUBTRACT)
        with Locations((20, -69)):
            Circle(SPLIT_BODIES_4_OUTLINE_R, mode=Mode.SUBTRACT)
    # profile 2 of 2: a face of its own
    with BuildSketch(Plane(origin=(0, 0, 0), x_dir=(1, 0, 0), z_dir=(0, 1, 0)).offset(SPLIT_START_7)):
        with Locations((-6.5, -105)):
            Rectangle(SPLIT_BODIES_4_OUTLINE_W, SPLIT_BODIES_4_OUTLINE_H)
        with Locations((-33, -105)):
            Circle(SPLIT_BODIES_4_OUTLINE_R, mode=Mode.SUBTRACT)
        with Locations((20, -105)):
            Circle(SPLIT_BODIES_4_OUTLINE_R, mode=Mode.SUBTRACT)
    extrude(amount=SPLIT_BODIES_4_DEPTH, mode=Mode.SUBTRACT)


with BuildPart() as body_3:
    # Split Bodies 2 7 outline → Split Bodies 2 7 (new body)
    with BuildSketch(Plane(origin=(0, 0, 0), x_dir=(1, 0, 0), z_dir=(0, 1, 0)).offset(SPLIT_START_6)):
        with BuildLine():
            Line((-29.5, -110), (-29.5, -64))
            Line((-29.5, -64), (-31.5, -64))
            Line((-31.5, -64), (-31.5, -73))
            Line((-31.5, -73), (-36.5, -73))
            ThreePointArc((-36.5, -73), (-37.207106781, -73.292893219), (-37.5, -74))
            Line((-37.5, -74), (-37.5, -78))
            ThreePointArc((-37.5, -78), (-37.207106781, -78.707106781), (-36.5, -79))
            Line((-36.5, -79), (-31.5, -79))
            Line((-31.5, -79), (-31.5, -94))
            Line((-31.5, -94), (-36.5, -94))
            ThreePointArc((-36.5, -94), (-37.207106781, -94.292893219), (-37.5, -95))
            Line((-37.5, -95), (-37.5, -99))
            ThreePointArc((-37.5, -99), (-37.207106781, -99.707106781), (-36.5, -100))
            Line((-36.5, -100), (-31.5, -100))
            Line((-31.5, -100), (-31.5, -110))
            Line((-31.5, -110), (-29.5, -110))
        make_face()
        with Locations((-34.5, -97)):
            Circle(SPLIT_BODIES_2_7_OUTLINE_R, mode=Mode.SUBTRACT)
        with Locations((-34.5, -76)):
            Circle(SPLIT_BODIES_2_7_OUTLINE_R, mode=Mode.SUBTRACT)
    extrude(amount=SPLIT_BODIES_2_7_DEPTH)


with BuildPart() as body_2_3:
    # Split Bodies 4 2 outline → Split Bodies 4 2 (new body)
    with BuildSketch(Plane(origin=(0, 0, 0), x_dir=(1, 0, 0), z_dir=(0, 1, 0)).offset(SPLIT_START_7)):
        with Locations((-6.5, -105)):
            Rectangle(SPLIT_BODIES_4_2_OUTLINE_W, SPLIT_BODIES_4_2_OUTLINE_H)
        with Locations((-33, -105)):
            Circle(SPLIT_BODIES_4_2_OUTLINE_R, mode=Mode.SUBTRACT)
        with Locations((20, -105)):
            Circle(SPLIT_BODIES_4_2_OUTLINE_R, mode=Mode.SUBTRACT)
    extrude(amount=SPLIT_BODIES_4_2_DEPTH)


with BuildPart() as body_3_2:
    # Split Bodies 4 3 outline → Split Bodies 4 3 (new body)
    with BuildSketch(Plane(origin=(0, 0, 0), x_dir=(1, 0, 0), z_dir=(0, 1, 0)).offset(SPLIT_START_7)):
        with Locations((-6.5, -69)):
            Rectangle(SPLIT_BODIES_4_3_OUTLINE_W, SPLIT_BODIES_4_3_OUTLINE_H)
        with Locations((-33, -69)):
            Circle(SPLIT_BODIES_4_3_OUTLINE_R, mode=Mode.SUBTRACT)
        with Locations((20, -69)):
            Circle(SPLIT_BODIES_4_3_OUTLINE_R, mode=Mode.SUBTRACT)
    extrude(amount=SPLIT_BODIES_4_3_DEPTH)


solid = body_2_2.part
